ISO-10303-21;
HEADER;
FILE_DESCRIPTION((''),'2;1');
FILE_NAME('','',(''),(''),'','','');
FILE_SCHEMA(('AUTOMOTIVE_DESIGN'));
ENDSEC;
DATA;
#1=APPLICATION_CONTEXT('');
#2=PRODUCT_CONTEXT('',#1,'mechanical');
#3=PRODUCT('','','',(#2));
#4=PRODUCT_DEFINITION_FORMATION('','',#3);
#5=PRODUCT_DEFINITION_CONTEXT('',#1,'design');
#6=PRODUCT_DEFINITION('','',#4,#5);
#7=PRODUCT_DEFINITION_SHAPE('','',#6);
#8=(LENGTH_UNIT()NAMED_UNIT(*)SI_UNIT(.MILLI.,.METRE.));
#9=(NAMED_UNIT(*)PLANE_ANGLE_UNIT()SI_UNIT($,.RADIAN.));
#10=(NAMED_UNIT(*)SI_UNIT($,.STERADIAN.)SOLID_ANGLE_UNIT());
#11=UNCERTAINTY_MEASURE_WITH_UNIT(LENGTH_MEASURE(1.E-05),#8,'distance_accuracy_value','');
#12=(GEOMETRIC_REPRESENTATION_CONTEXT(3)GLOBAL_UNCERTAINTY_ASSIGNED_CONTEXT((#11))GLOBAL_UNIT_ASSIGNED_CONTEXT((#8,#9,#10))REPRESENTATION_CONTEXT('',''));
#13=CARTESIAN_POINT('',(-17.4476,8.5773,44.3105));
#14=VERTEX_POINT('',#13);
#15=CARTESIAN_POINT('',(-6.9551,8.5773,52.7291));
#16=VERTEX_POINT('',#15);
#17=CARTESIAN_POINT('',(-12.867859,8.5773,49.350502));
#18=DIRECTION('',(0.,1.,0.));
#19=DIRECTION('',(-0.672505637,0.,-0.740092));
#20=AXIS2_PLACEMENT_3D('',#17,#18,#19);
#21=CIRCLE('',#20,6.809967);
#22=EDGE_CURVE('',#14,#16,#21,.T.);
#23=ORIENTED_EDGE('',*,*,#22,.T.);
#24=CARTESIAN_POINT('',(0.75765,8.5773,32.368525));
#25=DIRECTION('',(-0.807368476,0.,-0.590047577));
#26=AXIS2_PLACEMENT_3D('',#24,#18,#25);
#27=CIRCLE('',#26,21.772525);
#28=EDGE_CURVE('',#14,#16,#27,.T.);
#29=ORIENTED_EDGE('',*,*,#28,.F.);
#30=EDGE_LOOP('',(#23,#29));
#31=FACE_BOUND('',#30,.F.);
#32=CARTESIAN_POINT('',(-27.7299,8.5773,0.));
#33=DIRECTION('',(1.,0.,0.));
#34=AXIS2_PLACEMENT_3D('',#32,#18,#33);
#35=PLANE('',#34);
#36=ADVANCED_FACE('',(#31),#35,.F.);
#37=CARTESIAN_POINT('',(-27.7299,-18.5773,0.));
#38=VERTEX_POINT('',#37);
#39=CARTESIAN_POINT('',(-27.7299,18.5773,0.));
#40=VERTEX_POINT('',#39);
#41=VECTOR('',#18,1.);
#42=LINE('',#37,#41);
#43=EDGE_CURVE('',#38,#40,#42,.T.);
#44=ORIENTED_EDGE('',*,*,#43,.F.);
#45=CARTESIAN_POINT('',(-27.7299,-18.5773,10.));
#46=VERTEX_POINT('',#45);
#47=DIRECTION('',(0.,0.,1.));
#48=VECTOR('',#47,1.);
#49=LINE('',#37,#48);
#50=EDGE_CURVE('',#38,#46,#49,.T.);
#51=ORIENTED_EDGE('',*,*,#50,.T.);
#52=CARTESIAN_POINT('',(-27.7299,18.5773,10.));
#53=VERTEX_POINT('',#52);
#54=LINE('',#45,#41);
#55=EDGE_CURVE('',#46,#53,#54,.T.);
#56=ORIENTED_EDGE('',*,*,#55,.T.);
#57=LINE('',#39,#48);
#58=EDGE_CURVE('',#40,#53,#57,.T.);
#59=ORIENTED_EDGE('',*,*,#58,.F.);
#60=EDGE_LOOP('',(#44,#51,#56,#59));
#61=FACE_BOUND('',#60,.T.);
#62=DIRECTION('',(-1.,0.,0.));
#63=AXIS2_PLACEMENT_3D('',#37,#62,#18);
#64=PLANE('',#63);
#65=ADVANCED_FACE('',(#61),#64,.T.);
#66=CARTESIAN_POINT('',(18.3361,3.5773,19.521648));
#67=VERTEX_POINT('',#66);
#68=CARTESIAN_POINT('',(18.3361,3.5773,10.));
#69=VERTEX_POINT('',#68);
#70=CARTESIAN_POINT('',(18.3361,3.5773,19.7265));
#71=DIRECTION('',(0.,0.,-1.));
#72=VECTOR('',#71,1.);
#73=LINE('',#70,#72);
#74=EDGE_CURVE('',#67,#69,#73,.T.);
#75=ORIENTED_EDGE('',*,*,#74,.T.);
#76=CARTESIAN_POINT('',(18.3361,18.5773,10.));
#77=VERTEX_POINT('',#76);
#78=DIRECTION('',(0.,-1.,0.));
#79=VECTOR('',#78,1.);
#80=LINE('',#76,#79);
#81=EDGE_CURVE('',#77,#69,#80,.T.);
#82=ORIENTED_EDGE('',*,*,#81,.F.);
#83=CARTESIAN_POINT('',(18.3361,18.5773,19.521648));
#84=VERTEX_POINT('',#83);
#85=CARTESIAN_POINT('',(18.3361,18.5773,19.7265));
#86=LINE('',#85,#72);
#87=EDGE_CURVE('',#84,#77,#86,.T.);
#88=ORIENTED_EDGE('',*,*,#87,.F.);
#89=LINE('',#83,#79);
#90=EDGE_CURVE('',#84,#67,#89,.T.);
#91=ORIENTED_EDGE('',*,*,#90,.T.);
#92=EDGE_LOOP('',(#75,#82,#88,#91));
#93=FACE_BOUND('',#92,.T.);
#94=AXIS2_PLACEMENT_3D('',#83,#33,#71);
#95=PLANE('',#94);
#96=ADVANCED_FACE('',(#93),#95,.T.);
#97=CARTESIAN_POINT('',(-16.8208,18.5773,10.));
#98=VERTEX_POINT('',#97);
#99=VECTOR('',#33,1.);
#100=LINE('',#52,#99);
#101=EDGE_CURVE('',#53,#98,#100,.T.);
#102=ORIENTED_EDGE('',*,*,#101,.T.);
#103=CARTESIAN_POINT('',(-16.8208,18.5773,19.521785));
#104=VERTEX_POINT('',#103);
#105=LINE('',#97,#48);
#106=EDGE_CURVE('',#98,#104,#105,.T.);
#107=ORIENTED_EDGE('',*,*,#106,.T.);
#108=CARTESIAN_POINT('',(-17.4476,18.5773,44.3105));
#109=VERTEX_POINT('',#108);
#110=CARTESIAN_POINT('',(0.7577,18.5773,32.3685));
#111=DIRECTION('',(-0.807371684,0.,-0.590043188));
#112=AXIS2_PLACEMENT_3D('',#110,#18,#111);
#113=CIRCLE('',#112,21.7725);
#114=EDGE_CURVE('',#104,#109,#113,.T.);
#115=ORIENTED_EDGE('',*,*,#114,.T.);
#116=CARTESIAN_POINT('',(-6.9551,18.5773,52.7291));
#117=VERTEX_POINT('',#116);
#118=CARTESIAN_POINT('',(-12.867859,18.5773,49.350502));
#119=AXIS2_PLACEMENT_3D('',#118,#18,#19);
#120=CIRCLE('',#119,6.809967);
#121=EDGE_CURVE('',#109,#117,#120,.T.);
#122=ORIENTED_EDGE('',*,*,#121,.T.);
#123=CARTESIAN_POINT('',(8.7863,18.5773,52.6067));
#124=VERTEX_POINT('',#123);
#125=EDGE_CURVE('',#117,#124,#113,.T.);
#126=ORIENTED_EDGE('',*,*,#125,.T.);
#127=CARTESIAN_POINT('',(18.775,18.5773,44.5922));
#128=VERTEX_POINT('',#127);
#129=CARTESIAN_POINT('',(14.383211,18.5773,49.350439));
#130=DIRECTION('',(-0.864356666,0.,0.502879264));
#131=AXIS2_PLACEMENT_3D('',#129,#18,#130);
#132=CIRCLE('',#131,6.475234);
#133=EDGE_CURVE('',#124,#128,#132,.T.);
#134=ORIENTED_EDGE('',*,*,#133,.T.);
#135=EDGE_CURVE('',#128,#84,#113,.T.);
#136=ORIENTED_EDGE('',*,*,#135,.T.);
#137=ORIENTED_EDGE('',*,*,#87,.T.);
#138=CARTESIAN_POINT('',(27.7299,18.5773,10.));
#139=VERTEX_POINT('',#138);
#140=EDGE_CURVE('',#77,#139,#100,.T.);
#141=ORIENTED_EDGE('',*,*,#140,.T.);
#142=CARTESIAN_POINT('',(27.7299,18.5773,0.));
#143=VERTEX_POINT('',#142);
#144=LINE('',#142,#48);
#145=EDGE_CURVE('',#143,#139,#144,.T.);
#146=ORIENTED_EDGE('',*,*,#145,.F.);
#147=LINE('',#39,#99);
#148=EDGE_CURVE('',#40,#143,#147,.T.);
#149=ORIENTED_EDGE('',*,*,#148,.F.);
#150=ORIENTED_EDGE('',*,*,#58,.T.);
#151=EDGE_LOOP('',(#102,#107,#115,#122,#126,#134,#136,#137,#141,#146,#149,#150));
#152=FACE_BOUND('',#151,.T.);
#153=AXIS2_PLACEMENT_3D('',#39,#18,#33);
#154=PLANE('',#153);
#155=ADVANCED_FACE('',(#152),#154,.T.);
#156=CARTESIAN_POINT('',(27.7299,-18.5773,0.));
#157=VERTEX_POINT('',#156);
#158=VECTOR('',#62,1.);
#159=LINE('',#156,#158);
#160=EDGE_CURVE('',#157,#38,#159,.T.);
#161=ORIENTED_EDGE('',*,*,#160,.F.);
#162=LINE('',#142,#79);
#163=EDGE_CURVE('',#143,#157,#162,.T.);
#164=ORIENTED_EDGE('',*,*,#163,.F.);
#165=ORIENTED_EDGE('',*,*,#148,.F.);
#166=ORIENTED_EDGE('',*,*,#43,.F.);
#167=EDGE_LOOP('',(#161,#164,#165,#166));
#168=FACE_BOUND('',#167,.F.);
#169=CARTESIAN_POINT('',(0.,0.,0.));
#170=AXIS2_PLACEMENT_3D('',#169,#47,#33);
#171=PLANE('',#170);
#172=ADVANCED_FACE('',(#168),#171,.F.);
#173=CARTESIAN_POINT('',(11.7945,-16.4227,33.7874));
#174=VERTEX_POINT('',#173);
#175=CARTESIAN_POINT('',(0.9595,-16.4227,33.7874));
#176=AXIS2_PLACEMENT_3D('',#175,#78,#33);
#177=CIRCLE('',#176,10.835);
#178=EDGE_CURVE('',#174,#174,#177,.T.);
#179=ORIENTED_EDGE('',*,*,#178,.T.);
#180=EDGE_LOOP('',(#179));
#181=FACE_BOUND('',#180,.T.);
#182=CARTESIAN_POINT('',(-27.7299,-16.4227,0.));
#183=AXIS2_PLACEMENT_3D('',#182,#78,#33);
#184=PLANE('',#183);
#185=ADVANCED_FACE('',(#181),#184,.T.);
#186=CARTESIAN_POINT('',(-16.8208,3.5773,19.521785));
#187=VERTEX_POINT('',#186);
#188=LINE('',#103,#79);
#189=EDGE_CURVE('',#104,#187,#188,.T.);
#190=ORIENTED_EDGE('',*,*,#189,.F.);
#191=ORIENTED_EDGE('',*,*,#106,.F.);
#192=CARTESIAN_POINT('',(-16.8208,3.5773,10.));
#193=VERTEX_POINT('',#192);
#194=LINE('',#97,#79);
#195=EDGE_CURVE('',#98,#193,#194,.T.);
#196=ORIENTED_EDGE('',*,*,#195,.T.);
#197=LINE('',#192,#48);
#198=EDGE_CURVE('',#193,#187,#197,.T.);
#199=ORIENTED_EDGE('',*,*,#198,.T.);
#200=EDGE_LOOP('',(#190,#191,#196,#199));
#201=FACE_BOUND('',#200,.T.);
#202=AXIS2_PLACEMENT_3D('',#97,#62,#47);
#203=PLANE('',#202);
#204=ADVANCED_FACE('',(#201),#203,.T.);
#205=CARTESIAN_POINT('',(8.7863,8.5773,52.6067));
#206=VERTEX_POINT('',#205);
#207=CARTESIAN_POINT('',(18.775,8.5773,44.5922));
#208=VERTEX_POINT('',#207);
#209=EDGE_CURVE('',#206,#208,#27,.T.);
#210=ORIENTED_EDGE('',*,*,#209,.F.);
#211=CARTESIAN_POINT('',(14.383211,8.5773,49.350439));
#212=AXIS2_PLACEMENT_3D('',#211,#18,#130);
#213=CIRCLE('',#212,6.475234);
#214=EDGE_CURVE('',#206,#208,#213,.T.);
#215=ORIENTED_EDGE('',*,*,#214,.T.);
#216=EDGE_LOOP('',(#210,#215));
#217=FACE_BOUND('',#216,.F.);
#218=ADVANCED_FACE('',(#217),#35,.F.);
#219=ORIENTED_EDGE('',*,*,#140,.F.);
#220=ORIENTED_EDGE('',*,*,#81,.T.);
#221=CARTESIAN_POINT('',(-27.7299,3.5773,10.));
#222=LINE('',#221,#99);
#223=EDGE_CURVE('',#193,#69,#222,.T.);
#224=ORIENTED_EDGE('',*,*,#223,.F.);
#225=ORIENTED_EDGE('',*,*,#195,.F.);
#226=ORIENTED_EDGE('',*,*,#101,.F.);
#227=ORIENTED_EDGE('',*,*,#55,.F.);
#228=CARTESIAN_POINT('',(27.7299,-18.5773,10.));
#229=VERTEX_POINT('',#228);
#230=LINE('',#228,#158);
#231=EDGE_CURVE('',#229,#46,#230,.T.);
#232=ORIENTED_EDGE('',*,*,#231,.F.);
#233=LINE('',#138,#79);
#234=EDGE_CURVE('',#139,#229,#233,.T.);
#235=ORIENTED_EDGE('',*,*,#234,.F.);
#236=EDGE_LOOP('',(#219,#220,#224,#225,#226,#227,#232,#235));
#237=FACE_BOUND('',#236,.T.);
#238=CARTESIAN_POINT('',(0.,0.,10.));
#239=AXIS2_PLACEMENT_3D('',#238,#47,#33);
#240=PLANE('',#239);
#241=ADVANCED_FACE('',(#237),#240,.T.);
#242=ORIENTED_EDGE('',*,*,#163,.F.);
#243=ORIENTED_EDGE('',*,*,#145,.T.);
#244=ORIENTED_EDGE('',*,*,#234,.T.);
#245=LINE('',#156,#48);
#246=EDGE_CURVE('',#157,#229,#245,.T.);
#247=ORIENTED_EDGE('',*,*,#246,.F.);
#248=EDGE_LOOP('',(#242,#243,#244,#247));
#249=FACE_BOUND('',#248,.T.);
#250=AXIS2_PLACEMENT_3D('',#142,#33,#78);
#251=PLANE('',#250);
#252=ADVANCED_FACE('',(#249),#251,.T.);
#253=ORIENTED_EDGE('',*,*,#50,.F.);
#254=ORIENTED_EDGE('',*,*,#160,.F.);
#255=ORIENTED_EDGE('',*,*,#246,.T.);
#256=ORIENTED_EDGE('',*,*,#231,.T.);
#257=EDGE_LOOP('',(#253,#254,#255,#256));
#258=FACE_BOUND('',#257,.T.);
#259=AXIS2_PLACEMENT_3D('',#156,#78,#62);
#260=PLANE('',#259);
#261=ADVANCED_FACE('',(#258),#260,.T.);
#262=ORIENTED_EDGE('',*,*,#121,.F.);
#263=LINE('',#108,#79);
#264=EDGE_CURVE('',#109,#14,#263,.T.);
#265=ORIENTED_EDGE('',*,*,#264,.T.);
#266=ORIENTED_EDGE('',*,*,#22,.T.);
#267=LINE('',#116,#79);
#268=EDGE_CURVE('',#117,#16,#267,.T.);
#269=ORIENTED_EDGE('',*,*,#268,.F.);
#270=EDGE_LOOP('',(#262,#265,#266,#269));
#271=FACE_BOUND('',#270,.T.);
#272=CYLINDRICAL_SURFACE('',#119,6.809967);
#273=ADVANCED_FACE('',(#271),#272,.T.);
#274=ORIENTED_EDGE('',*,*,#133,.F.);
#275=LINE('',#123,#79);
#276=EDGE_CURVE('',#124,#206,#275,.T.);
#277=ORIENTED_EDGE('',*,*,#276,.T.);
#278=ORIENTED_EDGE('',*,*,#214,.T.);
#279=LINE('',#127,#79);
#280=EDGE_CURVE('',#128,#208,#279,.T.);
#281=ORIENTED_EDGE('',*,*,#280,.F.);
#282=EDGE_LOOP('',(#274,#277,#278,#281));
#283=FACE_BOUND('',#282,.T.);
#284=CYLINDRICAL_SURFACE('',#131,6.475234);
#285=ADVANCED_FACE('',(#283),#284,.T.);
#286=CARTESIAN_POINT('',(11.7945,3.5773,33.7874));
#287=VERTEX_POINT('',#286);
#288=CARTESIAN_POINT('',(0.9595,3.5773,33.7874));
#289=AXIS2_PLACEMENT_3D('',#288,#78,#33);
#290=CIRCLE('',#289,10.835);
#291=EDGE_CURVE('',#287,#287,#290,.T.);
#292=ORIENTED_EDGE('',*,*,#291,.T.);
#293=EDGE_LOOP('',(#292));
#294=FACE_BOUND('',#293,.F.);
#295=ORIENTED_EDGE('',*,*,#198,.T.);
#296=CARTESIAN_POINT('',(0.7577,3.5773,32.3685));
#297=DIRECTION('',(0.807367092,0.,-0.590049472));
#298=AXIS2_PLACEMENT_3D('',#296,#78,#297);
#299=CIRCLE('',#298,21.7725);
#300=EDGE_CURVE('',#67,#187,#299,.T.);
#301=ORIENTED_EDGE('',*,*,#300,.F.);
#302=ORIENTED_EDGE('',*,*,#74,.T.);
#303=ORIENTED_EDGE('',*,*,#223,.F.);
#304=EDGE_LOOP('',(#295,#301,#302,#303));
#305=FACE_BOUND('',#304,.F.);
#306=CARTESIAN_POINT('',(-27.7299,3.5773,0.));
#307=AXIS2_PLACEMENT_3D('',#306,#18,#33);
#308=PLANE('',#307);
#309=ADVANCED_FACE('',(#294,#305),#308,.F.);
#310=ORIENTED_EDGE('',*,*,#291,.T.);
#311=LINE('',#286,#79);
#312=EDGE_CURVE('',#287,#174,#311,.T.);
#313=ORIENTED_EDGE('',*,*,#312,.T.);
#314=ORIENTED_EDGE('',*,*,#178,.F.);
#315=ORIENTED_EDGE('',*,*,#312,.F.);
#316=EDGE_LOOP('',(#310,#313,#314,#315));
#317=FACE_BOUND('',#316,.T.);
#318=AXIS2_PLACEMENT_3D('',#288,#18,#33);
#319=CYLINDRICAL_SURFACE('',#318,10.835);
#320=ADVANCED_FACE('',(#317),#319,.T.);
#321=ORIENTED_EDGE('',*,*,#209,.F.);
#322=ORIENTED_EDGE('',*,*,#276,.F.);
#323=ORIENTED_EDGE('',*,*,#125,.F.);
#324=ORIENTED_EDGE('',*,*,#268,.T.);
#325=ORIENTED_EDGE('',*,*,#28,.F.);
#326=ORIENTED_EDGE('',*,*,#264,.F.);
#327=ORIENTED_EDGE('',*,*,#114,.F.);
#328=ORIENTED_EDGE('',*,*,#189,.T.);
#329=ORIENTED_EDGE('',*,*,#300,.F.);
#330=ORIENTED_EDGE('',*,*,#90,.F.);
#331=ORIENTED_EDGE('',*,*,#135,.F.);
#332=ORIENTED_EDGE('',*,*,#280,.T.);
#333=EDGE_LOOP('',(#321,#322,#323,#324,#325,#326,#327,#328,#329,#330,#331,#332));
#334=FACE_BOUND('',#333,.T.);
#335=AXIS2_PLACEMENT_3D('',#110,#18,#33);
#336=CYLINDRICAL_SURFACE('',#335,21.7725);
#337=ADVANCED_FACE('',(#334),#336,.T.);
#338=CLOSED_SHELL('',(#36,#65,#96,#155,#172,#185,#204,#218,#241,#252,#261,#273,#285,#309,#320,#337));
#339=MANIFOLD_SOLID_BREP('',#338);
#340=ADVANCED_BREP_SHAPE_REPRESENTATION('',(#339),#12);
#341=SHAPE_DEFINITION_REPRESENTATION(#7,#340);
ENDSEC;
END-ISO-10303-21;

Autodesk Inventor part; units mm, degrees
ref_plane "YZ Plane" through (0, 0, 0) normal (1, 0, 0) x (0, 1, 0)
ref_plane "XZ Plane" through (0, 0, 0) normal (0, 1, 0) x (-1, 0, 0)
ref_plane "XY Plane" through (0, 0, 0) normal (0, 0, 1) x (1, 0, 0)
sketch "스케치1" plane through (0, 0, 0) normal (0, 0, 1) x (1, 0, 0)
  line L0 (27.7299, -18.5773) -> (-27.7299, -18.5773)
  line L1 (-27.7299, -18.5773) -> (-27.7299, 18.5773)
  line L2 (-27.7299, 18.5773) -> (27.7299, 18.5773)
  line L3 (27.7299, 18.5773) -> (27.7299, -18.5773)
  line L4 (27.7299, -18.5773) -> (-27.7299, 18.5773) construction
  line L5 (-27.7299, -18.5773) -> (27.7299, 18.5773) construction
  point P0 (0, 0)
extrude "돌출1" add sketch "스케치1" along normal blind 10
sketch "스케치2" plane through (0, 0, 10) normal (0, 0, 1) x (1, 0, 0)
  line L0 (27.7299, 18.5773) -> (-27.7299, 18.5773) projected
  line L1 (-19.7299, 18.5773) -> (19.7299, 18.5773)
  line L2 (19.7299, 18.5773) -> (19.7299, 3.5485)
  line L3 (19.7299, 3.5485) -> (-19.7299, 3.5485)
  line L4 (-19.7299, 3.5485) -> (-19.7299, 18.5773)
  line L5 (27.7299, -18.5773) -> (27.7299, 18.5773) projected
  line L6 (-27.7299, 18.5773) -> (-27.7299, -18.5773) projected
  point P0 (0, 0)
  dimension "d2" = 8
  dimension "d3" = 8
sketch "스케치3" plane through (-27.7299, 18.5773, 0) normal (0, 1, 0) x (1, 0, 0)
  line L0 (0, -10) -> (55.4598, -10) projected
  line L1 (46.066, -10) -> (10.9091, -10)
  line L2 (10.9091, -10) -> (10.9091, -19.7265)
  line L3 (10.9091, -19.7265) -> (46.066, -19.7265)
  line L4 (46.066, -19.7265) -> (46.066, -10)
  circle A0 centre (28.4876, -32.3685) radius 21.7725
  point P0 (27.7299, 0)
extrude "돌출2" add sketch "스케치3" against normal blind 15
sketch "스케치4" plane through (-27.7299, 3.5773, 0) normal (0, -1, 0) x (1, 0, 0)
  circle A0 centre (28.6894, 33.7874) radius 10.835
  arc A1 (46.066, 19.5217) -> (10.9091, 19.5217) centre (28.4876, 32.3685) ccw projected
  arc A2 (46.2263, 44.9931) -> (36.5571, 52.5904) centre (41.9392, 49.4885) ccw
  arc A3 (21.0294, 52.8238) -> (10.3775, 44.4543) centre (15.036, 49.4885) ccw
  point P0 (27.7299, 0)
extrude "돌출3" add sketch "스케치4" along normal blind 20 contours A0
sketch "스케치5" plane through (-27.7299, 18.5773, 0) normal (0, 1, 0) x (1, 0, 0)
  arc A0 (10.9091, -19.5217) -> (46.066, -19.5217) centre (28.4876, -32.3685) ccw projected
  arc A1 (10.2823, -44.3105) -> (20.7748, -52.7291) centre (14.8621, -49.3505) ccw
  arc A2 (36.5162, -52.6067) -> (46.5049, -44.5922) centre (42.1131, -49.3505) ccw
  point P0 (27.7299, 0)
extrude "돌출4" add sketch "스케치5" against normal blind 10
properties part number "240626_part2"
